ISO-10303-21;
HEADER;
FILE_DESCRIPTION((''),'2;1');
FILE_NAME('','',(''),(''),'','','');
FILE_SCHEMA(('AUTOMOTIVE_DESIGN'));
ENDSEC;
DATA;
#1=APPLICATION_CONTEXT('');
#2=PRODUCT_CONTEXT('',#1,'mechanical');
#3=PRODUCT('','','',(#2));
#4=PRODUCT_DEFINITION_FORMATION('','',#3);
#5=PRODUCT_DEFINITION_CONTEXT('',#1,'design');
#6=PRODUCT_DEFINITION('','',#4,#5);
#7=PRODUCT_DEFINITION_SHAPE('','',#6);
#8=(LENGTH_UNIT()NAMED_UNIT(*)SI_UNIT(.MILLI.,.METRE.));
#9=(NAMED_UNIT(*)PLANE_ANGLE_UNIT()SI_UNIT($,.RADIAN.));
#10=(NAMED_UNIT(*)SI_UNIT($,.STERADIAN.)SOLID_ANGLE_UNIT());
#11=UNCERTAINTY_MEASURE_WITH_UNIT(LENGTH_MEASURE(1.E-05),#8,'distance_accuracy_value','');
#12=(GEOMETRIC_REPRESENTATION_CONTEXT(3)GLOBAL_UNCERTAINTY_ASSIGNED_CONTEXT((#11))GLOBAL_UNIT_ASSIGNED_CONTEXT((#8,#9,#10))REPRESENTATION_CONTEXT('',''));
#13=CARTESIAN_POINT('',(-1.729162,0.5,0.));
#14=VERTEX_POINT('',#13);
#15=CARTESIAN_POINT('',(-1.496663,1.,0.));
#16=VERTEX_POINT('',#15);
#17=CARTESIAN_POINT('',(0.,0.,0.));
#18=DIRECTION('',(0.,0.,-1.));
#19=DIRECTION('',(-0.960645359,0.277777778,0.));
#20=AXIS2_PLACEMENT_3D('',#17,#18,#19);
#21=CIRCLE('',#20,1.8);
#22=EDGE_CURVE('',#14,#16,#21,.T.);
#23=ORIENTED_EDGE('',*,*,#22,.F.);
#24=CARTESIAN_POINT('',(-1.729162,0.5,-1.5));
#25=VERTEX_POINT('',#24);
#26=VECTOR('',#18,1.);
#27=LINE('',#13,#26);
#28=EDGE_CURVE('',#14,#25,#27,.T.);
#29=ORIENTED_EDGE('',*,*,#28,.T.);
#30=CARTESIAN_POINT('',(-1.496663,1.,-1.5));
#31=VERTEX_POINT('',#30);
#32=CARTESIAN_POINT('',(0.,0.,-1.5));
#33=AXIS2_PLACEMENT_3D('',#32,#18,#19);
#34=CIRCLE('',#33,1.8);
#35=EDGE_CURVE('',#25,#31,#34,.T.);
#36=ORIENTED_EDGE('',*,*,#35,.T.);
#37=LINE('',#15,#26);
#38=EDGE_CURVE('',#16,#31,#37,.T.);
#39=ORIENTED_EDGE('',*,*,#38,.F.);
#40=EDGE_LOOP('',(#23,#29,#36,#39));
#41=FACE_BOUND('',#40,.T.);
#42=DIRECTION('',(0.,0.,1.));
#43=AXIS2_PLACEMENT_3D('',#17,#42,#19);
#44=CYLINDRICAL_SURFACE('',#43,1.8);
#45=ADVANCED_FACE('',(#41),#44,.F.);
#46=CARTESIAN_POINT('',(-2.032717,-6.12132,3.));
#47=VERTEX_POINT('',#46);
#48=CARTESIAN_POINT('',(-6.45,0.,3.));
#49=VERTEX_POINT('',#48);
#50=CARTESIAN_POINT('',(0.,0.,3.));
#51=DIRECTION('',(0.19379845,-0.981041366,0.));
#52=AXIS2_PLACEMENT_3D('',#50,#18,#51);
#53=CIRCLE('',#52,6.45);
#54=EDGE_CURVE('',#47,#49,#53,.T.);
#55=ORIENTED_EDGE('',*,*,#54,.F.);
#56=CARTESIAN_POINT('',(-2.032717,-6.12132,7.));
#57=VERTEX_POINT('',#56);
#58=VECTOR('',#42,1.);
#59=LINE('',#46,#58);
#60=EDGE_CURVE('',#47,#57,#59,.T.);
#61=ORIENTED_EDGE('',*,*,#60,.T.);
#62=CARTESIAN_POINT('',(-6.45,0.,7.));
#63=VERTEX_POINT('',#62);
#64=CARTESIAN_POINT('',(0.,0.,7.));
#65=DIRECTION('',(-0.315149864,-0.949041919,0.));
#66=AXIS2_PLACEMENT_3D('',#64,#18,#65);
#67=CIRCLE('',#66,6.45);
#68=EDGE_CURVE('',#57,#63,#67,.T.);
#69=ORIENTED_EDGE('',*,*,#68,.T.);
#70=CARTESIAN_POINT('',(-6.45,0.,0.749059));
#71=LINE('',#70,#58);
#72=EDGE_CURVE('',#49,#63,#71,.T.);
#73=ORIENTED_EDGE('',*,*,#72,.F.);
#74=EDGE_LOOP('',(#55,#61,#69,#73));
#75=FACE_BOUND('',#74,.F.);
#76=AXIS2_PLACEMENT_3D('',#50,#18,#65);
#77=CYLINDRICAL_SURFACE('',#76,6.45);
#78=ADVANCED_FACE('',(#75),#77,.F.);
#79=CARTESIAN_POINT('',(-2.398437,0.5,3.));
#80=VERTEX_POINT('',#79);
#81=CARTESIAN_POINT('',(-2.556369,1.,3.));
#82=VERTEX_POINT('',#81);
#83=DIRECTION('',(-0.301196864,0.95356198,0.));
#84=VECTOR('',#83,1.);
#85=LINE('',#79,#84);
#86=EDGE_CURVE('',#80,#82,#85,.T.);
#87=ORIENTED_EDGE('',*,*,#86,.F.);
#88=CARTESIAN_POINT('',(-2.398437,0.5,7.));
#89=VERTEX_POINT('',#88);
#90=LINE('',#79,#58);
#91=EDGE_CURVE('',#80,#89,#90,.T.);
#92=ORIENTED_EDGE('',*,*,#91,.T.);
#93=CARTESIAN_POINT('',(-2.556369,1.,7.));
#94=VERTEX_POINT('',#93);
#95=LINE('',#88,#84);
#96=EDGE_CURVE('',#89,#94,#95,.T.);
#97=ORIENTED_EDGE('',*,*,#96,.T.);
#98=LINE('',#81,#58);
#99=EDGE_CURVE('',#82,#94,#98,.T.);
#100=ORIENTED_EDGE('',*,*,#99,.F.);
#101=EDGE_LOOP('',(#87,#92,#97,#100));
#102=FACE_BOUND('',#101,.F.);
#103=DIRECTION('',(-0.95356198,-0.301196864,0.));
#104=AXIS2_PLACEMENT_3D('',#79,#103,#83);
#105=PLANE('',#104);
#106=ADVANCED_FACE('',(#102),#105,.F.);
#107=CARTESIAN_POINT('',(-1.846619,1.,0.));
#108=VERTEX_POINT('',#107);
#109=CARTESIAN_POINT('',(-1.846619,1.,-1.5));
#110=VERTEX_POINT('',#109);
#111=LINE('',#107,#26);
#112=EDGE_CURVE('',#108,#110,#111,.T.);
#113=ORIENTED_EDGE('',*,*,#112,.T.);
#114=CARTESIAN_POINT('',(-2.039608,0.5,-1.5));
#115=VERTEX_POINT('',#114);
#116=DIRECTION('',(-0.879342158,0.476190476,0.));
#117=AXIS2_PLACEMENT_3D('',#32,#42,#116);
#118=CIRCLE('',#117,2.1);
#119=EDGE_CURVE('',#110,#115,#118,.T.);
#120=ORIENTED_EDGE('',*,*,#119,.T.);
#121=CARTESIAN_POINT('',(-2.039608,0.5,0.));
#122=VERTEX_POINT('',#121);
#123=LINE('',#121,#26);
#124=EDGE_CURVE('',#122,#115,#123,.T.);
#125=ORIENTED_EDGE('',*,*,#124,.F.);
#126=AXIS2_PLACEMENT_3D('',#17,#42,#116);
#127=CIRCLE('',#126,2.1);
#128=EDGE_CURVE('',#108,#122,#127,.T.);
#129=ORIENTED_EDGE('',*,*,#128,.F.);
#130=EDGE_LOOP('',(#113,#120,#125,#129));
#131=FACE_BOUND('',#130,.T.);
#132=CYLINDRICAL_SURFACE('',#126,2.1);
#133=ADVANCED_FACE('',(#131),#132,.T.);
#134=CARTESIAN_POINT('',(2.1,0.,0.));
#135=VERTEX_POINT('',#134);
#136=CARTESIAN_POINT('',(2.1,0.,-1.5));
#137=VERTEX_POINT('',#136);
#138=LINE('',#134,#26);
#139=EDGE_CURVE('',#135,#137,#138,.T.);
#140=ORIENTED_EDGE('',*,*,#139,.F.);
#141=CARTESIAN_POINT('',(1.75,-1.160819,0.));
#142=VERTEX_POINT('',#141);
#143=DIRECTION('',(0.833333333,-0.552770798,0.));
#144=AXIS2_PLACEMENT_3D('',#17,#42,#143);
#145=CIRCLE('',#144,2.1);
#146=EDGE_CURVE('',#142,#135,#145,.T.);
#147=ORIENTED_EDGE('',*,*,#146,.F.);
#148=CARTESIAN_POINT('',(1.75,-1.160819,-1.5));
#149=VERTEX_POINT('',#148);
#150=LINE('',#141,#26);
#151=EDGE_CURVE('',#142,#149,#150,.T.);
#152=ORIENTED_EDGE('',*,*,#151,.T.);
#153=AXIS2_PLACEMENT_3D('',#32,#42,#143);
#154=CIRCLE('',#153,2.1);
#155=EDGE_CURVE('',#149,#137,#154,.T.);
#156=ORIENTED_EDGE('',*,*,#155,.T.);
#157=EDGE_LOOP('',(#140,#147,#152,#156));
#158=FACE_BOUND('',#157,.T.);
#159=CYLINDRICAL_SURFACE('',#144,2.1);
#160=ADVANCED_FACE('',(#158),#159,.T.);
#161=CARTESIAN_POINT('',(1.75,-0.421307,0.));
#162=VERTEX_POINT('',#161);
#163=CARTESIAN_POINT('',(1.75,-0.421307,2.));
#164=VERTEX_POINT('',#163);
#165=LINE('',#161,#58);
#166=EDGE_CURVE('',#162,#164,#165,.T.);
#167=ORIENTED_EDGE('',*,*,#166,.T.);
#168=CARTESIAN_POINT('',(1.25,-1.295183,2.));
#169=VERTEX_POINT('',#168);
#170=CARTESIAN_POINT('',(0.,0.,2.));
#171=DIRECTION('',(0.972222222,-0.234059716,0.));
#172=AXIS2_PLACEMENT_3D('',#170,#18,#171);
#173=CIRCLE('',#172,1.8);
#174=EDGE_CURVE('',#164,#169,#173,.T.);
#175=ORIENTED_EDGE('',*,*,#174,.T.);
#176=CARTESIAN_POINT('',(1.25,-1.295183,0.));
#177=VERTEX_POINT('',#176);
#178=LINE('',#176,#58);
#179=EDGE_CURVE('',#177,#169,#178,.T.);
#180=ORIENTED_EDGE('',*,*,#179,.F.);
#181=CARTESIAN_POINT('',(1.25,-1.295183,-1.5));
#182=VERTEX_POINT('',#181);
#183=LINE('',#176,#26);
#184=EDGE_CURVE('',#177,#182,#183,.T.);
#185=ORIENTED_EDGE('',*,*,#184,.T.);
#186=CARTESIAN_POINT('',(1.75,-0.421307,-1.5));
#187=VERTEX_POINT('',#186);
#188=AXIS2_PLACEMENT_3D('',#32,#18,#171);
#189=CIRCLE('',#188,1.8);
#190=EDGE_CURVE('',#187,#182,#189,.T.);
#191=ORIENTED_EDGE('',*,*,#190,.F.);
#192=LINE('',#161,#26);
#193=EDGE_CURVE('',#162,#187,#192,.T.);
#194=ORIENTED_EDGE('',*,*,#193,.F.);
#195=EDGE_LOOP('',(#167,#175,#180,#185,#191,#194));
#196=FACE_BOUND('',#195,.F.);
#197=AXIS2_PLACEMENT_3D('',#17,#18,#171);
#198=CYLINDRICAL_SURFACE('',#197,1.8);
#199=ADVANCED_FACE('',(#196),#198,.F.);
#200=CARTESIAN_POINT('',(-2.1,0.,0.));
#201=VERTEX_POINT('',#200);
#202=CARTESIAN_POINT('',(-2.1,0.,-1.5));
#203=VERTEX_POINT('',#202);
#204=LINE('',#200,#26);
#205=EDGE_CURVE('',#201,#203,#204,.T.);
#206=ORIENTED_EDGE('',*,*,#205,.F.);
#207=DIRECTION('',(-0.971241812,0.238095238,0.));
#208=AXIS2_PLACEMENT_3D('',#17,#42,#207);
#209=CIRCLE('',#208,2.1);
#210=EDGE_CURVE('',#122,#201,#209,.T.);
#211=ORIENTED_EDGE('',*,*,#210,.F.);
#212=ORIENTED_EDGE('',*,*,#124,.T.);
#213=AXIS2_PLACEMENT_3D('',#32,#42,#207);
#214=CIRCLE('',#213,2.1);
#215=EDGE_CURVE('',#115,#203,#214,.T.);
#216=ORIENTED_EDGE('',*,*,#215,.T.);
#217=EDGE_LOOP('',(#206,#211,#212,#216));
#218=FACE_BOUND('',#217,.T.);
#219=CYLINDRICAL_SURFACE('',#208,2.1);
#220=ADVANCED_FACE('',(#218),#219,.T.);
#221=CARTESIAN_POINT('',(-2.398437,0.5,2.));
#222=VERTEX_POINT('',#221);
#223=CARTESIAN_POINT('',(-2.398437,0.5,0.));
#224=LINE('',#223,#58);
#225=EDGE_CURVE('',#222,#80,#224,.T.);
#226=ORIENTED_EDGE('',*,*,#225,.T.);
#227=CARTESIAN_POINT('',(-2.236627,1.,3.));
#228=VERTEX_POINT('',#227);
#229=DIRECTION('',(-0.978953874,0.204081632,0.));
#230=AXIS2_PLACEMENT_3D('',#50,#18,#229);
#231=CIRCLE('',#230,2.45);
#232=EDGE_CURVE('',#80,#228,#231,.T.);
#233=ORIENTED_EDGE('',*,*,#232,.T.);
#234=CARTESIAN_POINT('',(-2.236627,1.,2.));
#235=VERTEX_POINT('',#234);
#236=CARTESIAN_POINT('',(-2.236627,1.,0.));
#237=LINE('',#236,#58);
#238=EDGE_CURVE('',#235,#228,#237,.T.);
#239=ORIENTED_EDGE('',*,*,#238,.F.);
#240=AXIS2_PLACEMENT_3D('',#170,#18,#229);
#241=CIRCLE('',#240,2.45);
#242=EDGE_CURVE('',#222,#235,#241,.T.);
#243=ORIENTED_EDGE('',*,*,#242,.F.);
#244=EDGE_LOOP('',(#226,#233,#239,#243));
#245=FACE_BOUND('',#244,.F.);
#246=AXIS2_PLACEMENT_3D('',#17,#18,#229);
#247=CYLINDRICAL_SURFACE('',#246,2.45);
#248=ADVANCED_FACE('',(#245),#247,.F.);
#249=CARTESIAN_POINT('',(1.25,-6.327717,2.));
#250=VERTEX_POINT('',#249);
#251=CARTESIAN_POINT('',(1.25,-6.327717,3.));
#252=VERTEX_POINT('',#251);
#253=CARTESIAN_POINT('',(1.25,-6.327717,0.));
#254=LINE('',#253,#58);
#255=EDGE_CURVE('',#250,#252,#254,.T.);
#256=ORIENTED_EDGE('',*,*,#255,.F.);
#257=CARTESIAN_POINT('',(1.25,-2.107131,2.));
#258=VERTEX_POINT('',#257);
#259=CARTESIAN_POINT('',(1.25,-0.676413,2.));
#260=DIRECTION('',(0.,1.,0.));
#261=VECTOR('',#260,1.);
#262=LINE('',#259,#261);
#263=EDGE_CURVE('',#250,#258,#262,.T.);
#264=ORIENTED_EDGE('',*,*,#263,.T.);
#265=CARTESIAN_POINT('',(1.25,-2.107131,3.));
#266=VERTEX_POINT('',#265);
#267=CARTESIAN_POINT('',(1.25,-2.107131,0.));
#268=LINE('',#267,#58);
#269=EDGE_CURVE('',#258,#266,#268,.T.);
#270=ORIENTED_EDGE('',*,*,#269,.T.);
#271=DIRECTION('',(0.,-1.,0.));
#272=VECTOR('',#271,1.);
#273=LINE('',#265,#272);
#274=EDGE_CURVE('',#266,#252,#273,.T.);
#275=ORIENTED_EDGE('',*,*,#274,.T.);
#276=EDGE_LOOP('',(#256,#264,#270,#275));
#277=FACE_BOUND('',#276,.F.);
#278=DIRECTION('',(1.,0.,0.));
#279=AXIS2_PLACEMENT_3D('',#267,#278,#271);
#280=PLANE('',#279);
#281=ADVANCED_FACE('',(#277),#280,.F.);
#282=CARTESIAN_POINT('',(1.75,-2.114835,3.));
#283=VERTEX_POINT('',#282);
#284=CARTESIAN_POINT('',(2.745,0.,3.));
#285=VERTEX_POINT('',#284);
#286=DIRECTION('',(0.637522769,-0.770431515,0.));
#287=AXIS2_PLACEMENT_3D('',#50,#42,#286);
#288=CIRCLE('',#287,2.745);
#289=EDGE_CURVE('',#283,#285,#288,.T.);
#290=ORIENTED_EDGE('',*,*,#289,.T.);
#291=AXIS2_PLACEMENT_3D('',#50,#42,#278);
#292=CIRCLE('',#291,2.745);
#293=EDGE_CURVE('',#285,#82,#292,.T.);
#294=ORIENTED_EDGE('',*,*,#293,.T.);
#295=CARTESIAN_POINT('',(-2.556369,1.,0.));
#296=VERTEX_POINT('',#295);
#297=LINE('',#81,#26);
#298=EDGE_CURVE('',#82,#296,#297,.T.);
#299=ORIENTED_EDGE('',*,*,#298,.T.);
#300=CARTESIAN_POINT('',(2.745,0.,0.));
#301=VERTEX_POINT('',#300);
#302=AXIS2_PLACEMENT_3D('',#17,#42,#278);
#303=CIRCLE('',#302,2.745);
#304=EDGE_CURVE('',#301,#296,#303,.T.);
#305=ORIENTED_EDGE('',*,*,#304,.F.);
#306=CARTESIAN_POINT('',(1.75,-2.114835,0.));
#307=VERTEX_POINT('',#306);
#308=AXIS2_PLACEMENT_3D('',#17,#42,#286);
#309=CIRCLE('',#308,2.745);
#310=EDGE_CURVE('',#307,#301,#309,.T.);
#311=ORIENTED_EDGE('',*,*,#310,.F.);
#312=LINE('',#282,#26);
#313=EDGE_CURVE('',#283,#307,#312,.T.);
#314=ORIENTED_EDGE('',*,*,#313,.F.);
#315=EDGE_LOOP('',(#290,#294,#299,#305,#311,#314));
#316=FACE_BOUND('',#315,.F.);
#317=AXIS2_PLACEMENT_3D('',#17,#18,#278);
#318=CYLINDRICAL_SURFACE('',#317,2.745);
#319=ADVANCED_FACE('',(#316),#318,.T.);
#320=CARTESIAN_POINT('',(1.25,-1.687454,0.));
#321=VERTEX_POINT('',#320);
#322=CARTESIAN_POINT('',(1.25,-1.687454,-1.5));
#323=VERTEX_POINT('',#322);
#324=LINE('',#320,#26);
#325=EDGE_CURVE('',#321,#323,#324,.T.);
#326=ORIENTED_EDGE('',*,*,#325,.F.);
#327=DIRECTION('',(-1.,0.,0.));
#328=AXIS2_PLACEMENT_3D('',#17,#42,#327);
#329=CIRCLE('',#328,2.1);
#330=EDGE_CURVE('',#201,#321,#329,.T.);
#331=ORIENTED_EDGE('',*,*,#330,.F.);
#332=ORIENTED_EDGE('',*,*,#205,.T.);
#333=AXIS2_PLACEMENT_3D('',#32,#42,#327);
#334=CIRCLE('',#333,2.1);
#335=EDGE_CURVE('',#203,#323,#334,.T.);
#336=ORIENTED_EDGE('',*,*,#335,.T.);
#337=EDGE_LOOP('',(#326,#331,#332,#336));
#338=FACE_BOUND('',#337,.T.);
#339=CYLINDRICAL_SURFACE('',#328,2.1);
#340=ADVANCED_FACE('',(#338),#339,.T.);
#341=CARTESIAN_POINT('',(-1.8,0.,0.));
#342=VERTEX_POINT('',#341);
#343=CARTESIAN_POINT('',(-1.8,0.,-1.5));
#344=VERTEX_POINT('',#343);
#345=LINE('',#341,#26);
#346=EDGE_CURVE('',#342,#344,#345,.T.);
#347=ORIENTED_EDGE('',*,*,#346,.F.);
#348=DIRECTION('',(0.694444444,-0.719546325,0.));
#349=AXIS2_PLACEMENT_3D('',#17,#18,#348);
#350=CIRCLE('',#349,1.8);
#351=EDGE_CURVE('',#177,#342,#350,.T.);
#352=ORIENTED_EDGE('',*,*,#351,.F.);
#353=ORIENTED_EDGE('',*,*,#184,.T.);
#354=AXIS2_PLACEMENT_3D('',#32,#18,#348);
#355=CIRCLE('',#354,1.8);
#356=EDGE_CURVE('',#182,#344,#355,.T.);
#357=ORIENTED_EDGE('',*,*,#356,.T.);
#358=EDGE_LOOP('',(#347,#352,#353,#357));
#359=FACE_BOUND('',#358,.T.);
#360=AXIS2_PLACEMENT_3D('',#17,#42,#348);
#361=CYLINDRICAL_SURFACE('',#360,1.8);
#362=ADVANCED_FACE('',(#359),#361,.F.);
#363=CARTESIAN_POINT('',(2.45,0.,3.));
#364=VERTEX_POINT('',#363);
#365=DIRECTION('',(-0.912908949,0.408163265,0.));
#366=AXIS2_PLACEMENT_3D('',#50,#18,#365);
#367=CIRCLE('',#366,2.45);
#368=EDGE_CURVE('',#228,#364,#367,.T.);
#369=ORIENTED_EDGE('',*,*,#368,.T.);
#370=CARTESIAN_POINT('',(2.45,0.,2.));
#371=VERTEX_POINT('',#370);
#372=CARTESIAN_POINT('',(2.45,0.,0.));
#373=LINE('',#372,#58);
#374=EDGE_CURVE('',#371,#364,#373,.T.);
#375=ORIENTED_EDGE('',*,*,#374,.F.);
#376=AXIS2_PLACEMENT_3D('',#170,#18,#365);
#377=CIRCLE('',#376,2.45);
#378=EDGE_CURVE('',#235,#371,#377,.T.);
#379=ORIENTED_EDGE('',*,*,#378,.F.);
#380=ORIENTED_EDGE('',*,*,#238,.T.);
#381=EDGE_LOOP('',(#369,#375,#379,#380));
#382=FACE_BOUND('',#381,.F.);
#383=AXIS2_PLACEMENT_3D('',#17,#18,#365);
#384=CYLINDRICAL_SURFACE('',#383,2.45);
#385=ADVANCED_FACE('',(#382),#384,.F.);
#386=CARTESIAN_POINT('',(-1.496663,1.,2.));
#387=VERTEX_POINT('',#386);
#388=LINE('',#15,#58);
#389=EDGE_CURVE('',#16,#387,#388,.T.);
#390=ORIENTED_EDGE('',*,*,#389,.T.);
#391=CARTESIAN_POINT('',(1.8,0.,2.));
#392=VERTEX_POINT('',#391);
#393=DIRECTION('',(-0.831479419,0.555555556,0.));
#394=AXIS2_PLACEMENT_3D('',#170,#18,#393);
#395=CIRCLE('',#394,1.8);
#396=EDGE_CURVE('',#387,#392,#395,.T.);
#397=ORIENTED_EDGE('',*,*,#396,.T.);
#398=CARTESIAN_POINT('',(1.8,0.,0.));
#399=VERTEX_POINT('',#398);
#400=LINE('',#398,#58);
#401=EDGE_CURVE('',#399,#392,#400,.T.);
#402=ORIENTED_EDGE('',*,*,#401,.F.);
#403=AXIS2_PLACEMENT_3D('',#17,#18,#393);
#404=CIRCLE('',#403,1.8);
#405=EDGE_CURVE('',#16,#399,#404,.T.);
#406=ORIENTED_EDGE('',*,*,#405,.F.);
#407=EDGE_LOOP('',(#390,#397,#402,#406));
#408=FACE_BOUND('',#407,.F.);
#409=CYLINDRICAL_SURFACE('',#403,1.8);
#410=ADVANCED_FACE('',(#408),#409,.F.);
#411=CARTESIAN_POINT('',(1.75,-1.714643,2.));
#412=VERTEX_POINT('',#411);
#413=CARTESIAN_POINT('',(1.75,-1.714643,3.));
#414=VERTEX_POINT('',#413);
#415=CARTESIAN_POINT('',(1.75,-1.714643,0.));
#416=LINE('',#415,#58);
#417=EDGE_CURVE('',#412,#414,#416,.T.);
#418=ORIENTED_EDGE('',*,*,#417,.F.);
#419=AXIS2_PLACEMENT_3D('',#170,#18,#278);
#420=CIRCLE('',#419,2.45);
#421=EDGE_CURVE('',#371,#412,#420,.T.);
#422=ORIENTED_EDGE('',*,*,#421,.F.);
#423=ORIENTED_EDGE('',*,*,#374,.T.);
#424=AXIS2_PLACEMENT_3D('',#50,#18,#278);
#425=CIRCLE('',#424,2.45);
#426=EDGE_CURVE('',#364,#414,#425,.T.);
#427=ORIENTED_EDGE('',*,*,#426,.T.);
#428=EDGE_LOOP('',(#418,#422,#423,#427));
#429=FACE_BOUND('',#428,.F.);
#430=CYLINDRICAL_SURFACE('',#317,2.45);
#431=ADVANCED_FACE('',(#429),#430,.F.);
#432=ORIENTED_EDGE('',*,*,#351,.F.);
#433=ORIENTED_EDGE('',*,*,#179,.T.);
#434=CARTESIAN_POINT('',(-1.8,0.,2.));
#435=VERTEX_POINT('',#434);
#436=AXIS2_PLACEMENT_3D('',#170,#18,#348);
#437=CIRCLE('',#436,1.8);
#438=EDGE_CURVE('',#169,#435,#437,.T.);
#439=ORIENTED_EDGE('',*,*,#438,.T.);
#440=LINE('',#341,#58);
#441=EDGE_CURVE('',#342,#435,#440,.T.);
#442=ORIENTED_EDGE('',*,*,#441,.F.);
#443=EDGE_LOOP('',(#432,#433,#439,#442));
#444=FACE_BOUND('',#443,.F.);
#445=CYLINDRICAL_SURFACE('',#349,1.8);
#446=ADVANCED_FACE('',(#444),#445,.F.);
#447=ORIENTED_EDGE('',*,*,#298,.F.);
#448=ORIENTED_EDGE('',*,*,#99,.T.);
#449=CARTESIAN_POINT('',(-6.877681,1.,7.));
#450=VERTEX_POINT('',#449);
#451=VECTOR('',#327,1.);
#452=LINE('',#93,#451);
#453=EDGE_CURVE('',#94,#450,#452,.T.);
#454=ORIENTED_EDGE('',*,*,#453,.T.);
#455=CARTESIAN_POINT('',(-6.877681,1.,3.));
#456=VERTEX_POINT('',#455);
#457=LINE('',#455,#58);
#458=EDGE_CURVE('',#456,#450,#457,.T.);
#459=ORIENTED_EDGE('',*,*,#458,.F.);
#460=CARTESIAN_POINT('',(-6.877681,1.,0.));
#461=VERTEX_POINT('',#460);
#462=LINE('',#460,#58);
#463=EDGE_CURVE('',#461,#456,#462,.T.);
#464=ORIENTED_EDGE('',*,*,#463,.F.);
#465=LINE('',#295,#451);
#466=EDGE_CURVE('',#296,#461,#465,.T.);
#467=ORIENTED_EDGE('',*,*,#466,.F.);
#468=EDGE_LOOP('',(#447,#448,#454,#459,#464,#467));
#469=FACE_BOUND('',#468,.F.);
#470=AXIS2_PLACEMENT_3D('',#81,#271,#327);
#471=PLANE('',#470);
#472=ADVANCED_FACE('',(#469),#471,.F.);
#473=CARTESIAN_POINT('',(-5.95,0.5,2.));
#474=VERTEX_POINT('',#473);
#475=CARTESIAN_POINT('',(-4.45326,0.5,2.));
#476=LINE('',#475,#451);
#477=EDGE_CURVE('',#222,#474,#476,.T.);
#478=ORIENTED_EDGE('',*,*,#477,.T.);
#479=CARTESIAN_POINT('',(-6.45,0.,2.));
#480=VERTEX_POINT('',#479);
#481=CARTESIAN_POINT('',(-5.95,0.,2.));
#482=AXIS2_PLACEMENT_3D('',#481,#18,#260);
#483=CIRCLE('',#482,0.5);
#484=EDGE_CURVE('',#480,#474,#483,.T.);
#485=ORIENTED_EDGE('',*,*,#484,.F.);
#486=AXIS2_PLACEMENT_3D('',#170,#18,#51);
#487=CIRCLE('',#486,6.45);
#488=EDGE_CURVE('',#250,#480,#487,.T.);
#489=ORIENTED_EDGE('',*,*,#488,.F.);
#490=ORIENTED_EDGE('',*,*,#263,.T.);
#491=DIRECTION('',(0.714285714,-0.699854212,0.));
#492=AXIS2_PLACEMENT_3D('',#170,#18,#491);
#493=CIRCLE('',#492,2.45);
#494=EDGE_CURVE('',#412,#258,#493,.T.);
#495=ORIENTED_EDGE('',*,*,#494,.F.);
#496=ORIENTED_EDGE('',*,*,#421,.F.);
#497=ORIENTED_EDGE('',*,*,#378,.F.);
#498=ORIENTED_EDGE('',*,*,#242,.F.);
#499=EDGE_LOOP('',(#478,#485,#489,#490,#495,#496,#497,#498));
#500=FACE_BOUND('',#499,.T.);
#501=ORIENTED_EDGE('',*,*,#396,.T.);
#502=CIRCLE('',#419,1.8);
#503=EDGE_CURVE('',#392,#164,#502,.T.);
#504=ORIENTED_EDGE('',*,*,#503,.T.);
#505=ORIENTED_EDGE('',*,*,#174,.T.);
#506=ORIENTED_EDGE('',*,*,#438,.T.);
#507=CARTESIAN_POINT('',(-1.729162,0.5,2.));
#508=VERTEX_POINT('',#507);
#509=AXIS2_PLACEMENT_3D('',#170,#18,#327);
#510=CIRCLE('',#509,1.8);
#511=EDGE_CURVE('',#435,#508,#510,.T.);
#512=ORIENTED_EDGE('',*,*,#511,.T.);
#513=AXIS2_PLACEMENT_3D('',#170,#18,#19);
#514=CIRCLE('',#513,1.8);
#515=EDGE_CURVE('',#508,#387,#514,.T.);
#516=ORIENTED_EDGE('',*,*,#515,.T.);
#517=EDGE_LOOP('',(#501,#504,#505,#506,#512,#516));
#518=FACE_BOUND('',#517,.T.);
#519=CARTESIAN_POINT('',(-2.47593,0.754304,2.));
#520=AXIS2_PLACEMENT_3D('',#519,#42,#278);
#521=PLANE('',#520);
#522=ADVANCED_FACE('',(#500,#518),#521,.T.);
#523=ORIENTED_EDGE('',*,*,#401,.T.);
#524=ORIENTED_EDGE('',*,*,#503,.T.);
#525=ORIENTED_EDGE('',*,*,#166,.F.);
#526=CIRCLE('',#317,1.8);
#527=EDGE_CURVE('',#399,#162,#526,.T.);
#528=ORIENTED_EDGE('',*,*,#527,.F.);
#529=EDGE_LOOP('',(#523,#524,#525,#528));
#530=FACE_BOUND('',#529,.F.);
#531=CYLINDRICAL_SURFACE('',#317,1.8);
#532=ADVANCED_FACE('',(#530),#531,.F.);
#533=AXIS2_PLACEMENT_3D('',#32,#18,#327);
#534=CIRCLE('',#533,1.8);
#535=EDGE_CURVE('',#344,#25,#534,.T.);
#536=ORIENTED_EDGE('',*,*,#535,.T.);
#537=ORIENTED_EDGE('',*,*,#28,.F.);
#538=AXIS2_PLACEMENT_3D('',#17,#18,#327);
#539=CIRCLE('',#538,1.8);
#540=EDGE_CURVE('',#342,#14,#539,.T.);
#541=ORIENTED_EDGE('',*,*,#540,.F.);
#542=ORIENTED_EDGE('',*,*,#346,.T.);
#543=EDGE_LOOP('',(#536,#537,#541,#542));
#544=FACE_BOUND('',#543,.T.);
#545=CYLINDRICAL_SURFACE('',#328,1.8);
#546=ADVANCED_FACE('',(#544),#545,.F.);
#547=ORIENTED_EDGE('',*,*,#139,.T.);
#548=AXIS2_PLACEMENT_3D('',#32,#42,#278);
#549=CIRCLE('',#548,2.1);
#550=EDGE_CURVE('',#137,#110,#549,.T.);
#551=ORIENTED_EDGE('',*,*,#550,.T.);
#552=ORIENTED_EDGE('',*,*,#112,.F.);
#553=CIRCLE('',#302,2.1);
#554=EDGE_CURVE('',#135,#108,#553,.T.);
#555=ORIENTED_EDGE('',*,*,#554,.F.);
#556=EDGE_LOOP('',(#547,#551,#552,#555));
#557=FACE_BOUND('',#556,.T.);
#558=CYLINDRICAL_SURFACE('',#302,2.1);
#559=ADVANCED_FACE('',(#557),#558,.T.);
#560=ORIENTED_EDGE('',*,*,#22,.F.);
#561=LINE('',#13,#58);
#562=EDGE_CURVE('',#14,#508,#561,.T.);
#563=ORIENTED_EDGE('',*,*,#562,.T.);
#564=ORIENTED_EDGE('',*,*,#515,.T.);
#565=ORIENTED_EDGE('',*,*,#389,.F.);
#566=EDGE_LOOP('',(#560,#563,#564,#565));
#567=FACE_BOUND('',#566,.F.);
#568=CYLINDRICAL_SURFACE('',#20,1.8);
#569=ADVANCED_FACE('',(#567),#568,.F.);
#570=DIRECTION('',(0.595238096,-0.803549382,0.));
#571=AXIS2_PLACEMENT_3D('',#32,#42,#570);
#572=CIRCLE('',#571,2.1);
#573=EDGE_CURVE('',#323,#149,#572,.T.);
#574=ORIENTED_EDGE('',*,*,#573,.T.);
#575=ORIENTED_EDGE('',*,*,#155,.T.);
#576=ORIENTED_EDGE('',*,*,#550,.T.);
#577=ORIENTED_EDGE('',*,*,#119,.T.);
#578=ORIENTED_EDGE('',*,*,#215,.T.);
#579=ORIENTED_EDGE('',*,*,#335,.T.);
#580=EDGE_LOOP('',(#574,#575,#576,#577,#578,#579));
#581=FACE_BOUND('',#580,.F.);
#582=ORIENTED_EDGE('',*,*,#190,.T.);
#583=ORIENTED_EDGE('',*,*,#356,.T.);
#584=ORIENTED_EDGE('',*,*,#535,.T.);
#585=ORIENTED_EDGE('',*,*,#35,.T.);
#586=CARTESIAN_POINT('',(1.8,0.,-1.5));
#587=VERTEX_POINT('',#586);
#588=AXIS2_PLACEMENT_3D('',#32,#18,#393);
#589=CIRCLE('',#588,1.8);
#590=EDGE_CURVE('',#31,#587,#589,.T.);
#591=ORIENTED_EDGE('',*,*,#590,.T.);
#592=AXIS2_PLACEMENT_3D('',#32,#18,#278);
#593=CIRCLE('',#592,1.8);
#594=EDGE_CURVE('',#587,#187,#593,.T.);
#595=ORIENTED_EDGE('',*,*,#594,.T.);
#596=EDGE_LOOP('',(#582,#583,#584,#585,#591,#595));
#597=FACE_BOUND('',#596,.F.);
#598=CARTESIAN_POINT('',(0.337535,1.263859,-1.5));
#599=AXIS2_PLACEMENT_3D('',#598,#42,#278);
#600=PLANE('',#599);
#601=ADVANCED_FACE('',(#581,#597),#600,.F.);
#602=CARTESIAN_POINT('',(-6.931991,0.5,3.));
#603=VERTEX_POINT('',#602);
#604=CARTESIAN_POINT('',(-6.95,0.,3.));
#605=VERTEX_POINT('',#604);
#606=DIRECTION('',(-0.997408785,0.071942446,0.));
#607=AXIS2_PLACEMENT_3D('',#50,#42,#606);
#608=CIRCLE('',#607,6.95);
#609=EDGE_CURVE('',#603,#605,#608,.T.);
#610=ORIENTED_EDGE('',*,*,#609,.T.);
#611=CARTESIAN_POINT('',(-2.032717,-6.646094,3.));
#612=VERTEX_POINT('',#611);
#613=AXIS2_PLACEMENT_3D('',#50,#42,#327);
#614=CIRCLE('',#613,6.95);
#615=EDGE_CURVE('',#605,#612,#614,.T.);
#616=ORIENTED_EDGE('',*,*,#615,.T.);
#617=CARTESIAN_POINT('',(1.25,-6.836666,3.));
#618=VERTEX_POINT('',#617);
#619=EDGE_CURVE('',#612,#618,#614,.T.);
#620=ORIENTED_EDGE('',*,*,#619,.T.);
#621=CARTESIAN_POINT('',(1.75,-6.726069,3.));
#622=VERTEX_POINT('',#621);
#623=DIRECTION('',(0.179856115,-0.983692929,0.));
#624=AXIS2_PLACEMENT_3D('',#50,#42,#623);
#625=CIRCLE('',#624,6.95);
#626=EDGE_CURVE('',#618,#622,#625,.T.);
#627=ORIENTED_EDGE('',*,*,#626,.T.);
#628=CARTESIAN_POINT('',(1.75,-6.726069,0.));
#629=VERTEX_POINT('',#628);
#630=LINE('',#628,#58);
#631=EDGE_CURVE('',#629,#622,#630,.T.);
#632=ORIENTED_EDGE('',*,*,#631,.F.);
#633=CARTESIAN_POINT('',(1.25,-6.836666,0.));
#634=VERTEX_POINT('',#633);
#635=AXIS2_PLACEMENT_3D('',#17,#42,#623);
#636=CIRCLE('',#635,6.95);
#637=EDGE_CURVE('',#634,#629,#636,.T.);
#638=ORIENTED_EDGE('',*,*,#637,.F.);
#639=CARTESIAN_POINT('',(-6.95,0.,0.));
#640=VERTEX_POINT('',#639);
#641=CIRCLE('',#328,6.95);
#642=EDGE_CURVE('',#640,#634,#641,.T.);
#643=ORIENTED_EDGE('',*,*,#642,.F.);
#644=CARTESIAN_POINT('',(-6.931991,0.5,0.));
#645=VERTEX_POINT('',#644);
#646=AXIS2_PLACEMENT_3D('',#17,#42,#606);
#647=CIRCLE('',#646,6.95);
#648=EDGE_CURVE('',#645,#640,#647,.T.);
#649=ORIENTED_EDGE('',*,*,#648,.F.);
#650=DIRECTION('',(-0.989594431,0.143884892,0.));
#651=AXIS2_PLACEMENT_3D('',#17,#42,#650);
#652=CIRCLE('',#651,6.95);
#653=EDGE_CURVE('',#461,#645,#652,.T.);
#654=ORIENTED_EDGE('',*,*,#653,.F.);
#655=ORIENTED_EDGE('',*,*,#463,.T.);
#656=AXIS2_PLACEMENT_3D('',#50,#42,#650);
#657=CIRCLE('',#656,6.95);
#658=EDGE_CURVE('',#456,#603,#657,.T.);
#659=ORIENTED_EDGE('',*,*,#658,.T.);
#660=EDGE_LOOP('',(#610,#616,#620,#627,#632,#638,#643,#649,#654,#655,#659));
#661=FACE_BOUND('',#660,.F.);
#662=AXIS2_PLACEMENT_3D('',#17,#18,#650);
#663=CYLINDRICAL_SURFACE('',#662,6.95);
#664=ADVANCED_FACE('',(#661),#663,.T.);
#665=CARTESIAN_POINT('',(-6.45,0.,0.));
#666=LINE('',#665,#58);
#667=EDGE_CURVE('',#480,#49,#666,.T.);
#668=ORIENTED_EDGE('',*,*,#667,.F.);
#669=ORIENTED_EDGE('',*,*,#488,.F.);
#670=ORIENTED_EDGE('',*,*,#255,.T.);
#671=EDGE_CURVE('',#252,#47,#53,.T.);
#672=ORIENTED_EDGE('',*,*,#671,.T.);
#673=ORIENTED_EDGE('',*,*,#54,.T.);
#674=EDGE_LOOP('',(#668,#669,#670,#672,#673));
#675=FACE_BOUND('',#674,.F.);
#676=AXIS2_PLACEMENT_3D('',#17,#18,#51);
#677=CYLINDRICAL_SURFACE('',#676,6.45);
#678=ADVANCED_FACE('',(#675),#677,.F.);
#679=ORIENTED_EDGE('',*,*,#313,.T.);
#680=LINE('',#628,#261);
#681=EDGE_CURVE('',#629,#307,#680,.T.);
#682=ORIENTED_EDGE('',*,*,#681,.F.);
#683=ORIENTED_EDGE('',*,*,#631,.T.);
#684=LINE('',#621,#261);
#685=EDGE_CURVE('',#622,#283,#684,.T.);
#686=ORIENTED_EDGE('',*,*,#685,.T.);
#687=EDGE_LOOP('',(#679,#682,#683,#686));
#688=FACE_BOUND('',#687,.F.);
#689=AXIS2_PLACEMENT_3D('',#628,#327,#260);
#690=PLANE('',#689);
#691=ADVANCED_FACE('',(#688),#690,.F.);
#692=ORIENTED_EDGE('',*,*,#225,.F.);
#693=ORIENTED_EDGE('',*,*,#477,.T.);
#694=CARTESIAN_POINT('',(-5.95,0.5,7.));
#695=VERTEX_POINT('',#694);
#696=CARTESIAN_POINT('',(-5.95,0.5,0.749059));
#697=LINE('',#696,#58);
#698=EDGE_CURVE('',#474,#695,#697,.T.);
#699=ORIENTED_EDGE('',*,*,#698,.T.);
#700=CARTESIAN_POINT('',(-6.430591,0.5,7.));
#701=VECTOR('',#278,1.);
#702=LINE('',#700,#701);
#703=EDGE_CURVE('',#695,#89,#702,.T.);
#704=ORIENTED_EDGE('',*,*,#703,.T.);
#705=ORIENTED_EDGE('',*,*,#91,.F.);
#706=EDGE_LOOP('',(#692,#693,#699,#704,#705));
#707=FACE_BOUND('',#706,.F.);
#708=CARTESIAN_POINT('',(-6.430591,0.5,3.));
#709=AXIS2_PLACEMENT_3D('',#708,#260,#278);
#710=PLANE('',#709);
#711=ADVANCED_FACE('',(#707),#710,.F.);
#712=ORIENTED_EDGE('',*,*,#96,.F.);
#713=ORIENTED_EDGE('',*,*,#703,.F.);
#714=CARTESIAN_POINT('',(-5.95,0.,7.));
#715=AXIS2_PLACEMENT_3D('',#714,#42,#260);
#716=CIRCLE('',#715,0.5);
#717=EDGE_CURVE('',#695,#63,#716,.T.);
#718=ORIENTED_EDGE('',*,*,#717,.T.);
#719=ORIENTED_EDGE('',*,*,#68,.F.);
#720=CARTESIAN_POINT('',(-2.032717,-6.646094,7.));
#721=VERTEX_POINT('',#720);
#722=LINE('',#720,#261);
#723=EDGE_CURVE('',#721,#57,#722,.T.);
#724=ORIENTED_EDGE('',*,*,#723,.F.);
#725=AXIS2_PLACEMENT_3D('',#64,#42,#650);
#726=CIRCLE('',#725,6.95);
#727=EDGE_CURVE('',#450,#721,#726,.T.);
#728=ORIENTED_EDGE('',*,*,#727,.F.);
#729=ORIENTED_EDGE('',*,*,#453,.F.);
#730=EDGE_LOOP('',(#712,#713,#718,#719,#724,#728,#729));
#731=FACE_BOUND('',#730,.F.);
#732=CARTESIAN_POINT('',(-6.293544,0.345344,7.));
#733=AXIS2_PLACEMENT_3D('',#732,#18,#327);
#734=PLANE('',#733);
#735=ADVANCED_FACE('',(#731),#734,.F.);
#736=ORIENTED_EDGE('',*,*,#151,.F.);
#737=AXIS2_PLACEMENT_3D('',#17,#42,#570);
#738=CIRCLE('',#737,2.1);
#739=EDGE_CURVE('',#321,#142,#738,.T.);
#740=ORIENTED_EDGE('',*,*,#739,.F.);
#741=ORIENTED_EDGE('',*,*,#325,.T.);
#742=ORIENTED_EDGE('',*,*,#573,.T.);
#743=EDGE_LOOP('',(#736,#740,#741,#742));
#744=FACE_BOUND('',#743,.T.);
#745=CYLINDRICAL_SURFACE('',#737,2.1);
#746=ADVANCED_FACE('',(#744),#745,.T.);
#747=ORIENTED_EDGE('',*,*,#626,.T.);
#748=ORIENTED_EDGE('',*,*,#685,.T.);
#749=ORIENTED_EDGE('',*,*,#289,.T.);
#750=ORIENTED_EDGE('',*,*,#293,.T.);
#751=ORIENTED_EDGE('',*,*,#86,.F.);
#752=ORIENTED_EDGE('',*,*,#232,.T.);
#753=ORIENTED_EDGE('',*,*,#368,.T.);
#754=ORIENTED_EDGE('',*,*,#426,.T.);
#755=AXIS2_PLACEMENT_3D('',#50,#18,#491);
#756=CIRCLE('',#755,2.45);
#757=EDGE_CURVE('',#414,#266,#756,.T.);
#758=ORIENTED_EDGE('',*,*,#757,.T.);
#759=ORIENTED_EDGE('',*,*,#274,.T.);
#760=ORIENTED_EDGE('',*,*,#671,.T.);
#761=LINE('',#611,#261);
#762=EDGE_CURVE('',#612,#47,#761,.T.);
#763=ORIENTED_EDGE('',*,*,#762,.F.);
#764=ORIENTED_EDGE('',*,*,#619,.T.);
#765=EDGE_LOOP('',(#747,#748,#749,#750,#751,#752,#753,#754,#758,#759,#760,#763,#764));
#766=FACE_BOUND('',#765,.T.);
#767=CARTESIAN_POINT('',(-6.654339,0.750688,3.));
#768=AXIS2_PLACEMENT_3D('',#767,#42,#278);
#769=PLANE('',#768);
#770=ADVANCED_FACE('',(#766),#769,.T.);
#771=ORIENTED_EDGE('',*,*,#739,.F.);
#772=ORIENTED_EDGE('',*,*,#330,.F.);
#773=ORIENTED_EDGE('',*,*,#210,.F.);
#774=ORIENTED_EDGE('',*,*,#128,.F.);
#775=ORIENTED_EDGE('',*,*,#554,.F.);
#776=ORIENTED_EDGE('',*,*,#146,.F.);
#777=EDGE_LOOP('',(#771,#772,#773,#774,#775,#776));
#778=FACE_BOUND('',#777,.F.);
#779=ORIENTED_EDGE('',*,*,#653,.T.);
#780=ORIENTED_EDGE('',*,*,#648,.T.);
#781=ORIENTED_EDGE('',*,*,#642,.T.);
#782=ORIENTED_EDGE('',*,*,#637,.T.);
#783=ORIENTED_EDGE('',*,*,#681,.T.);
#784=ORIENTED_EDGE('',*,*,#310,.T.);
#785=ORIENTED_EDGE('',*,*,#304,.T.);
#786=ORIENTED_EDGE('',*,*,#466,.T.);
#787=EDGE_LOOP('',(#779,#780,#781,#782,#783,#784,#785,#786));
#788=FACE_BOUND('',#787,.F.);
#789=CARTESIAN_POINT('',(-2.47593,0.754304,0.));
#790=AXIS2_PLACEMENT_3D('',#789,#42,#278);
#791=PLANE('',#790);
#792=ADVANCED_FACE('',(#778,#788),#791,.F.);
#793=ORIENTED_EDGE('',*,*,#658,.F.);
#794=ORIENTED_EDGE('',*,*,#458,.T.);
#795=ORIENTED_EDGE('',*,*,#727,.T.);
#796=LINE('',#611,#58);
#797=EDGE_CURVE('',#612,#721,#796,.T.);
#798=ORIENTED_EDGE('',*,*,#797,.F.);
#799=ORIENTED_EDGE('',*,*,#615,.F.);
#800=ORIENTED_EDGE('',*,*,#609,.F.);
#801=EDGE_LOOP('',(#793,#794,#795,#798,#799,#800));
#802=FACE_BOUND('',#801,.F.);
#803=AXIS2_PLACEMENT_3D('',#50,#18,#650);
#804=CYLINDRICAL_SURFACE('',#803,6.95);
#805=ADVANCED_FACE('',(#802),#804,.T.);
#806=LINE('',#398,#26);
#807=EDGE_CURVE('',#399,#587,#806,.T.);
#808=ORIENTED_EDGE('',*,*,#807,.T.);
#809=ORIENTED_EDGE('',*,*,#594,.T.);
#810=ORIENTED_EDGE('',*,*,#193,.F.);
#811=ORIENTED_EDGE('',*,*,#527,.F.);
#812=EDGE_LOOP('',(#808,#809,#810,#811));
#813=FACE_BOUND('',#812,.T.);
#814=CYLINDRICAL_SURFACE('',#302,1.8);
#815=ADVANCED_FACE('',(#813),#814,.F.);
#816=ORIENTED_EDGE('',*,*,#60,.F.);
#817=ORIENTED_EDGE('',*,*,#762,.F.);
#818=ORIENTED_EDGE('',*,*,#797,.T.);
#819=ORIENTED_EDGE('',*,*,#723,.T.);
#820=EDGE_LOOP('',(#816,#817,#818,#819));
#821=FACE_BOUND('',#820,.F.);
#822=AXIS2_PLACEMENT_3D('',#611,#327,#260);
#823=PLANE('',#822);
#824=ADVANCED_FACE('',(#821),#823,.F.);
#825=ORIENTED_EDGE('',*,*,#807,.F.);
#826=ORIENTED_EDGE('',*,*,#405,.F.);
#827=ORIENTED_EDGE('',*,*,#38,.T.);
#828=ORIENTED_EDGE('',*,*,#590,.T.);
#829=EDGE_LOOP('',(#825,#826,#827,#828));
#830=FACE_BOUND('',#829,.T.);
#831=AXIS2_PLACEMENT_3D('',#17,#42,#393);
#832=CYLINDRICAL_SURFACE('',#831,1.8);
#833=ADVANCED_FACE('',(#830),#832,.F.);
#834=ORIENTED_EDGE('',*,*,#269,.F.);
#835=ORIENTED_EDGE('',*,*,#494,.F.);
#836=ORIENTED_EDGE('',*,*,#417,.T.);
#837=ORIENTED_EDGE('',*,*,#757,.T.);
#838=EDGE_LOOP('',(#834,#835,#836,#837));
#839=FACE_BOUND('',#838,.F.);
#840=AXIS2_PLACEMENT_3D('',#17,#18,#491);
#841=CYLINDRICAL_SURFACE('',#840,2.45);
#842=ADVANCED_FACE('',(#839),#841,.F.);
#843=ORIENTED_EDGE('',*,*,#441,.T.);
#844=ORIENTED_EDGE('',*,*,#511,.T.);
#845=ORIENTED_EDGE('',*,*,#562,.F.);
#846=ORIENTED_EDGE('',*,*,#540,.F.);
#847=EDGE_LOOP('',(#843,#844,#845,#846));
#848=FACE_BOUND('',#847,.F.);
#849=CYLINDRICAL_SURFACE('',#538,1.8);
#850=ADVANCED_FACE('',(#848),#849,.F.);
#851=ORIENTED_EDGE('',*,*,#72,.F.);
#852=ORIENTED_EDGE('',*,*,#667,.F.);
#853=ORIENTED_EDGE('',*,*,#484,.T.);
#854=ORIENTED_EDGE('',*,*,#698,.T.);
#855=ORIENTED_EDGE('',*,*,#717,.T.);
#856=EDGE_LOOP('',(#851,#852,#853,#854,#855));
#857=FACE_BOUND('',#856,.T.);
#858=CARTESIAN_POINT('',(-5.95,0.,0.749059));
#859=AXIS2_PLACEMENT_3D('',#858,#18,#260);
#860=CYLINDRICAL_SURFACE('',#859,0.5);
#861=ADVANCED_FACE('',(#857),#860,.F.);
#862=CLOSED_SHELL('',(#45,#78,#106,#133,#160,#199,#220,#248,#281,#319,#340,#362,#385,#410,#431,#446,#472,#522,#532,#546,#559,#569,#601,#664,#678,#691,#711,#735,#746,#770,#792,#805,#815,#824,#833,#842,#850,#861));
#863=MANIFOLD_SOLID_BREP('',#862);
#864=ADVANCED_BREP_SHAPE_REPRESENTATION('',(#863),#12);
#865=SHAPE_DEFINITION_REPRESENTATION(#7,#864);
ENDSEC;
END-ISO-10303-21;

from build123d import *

# Parameters (mm, degrees)
F1_DEPTH    = 2
F2_DEPTH    = 3
F3_DEPTH    = 1.5
F5_DEPTH    = 4
F6_T1_DEPTH = 6.2509414233


# Not quite as in the source:
# - a fillet or chamfer that OpenCascade refuses, or shapes differently, is made with other operations: its cross-section is extruded or revolved along the edge and cut away or added
# - a feature names something its author has since deleted; it is built from what else it names


with BuildPart() as f1:
    # F0 (on Top) → F1 (new body)
    with BuildSketch(Plane.XY):
        with BuildLine():
            ThreePointArc((-2.398436991, 0.5), (-2.3309771289, 0.7543511281), (-2.2366269246, 1))
            Line((-2.2366269246, 1), (-2.556369496, 1))
            ThreePointArc((-2.556369496, 1), (-2.6395896521, 0.7533866658), (-2.6990785465, 0.5))
            Line((-2.6990785465, 0.5), (-2.398436991, 0.5))
        make_face()
        with BuildLine():
            ThreePointArc((-2.2366269246, 1), (0.5112553348, 2.3960630173), (2.45, 0))
            ThreePointArc((2.45, 0), (2.2682592444, -0.9260129589), (1.75, -1.7146428199))
            Line((1.75, -1.7146428199), (1.75, -2.1148345089))
            ThreePointArc((1.75, -2.1148345089), (2.483825175, -1.1686049375), (2.745, 0))
            ThreePointArc((2.745, 0), (0.5088176164, 2.6974301906), (-2.556369496, 1))
            Line((-2.556369496, 1), (-2.2366269246, 1))
        make_face()
        with BuildLine():
            ThreePointArc((-2.6990785465, 0.5), (-2.6395896521, 0.7533866658), (-2.556369496, 1))
            Line((-2.556369496, 1), (-6.3720091023, 1))
            ThreePointArc((-6.3720091023, 1), (-6.4061799882, 0.7505717543), (-6.4305909526, 0.5))
            Line((-6.4305909526, 0.5), (-2.6990785465, 0.5))
        make_face()
        with BuildLine():
            ThreePointArc((-2.745, 0), (-2.7334955286, 0.2510521758), (-2.6990785465, 0.5))
            Line((-2.6990785465, 0.5), (-6.4305909526, 0.5))
            ThreePointArc((-6.4305909526, 0.5), (-6.4451459116, 0.2501882847), (-6.45, 0))
            Line((-6.45, 0), (-2.745, 0))
        make_face()
        with BuildLine():
            Line((1.25, -6.3277168078), (1.25, -2.4438749968))
            ThreePointArc((1.25, -2.4438749968), (-1.4324410983, -2.341610023), (-2.745, 0))
            Line((-2.745, 0), (-6.45, 0))
            ThreePointArc((-6.45, 0), (-4.0951190459, -4.9832218494), (1.25, -6.3277168078))
        make_face()
        with BuildLine():
            Line((1.25, -2.4438749968), (1.25, -2.1071307506))
            ThreePointArc((1.25, -2.1071307506), (-1.2124355653, -2.1289668856), (-2.45, 0))
            Line((-2.45, 0), (-2.745, 0))
            ThreePointArc((-2.745, 0), (-1.4324410983, -2.341610023), (1.25, -2.4438749968))
        make_face()
        with BuildLine():
            Line((1.75, -2.1148345089), (1.75, -1.7146428199))
            ThreePointArc((1.75, -1.7146428199), (1.5127827649, -1.927171063), (1.25, -2.1071307506))
            Line((1.25, -2.1071307506), (1.25, -2.4438749968))
            ThreePointArc((1.25, -2.4438749968), (1.5089953316, -2.2930237873), (1.75, -2.1148345089))
        make_face()
        with BuildLine():
            Line((1.75, -6.2080592781), (1.75, -2.1148345089))
            ThreePointArc((1.75, -2.1148345089), (1.5089953316, -2.2930237873), (1.25, -2.4438749968))
            Line((1.25, -2.4438749968), (1.25, -6.3277168078))
            ThreePointArc((1.25, -6.3277168078), (1.5011926862, -6.272871792), (1.75, -6.2080592781))
        make_face()
        with BuildLine():
            ThreePointArc((-6.4305909526, 0.5), (-6.4061799882, 0.7505717543), (-6.3720091023, 1))
            Line((-6.3720091023, 1), (-6.8776812953, 1))
            ThreePointArc((-6.8776812953, 1), (-6.9093605068, 0.7504914307), (-6.931991056, 0.5))
            Line((-6.931991056, 0.5), (-6.4305909526, 0.5))
        make_face()
        with BuildLine():
            Line((1.75, -6.7260686883), (1.75, -6.2080592781))
            ThreePointArc((1.75, -6.2080592781), (1.5011926862, -6.272871792), (1.25, -6.3277168078))
            Line((1.25, -6.3277168078), (1.25, -6.8366658541))
            ThreePointArc((1.25, -6.8366658541), (1.501018965, -6.7859739218), (1.75, -6.7260686883))
        make_face()
        with BuildLine():
            Line((1.25, -6.8366658541), (1.25, -6.3277168078))
            ThreePointArc((1.25, -6.3277168078), (-4.0951190459, -4.9832218494), (-6.45, 0))
            Line((-6.45, 0), (-6.95, 0))
            ThreePointArc((-6.95, 0), (-4.4505617623, -5.3380708126), (1.25, -6.8366658541))
        make_face()
        with BuildLine():
            ThreePointArc((-6.45, 0), (-6.4451459116, 0.2501882847), (-6.4305909526, 0.5))
            Line((-6.4305909526, 0.5), (-6.931991056, 0.5))
            ThreePointArc((-6.931991056, 0.5), (-6.9454963048, 0.2501621085), (-6.95, 0))
            Line((-6.95, 0), (-6.45, 0))
        make_face()
        with BuildLine():
            ThreePointArc((-2.45, 0), (-2.4370751556, 0.2513258562), (-2.398436991, 0.5))
            Line((-2.398436991, 0.5), (-2.6990785465, 0.5))
            ThreePointArc((-2.6990785465, 0.5), (-2.7334955286, 0.2510521758), (-2.745, 0))
            Line((-2.745, 0), (-2.45, 0))
        make_face()
        with BuildLine():
            ThreePointArc((-2.45, 0), (-1.2124355653, -2.1289668856), (1.25, -2.1071307506))
            Line((1.25, -2.1071307506), (1.25, -1.6874537031))
            ThreePointArc((1.25, -1.6874537031), (-0.9447221814, -1.8754999334), (-2.1, 0))
            Line((-2.1, 0), (-2.45, 0))
        make_face()
        with BuildLine():
            ThreePointArc((-2.1, 0), (-0.9447221814, -1.8754999334), (1.25, -1.6874537031))
            Line((1.25, -1.6874537031), (1.25, -1.2951833847))
            ThreePointArc((1.25, -1.2951833847), (-0.703562364, -1.6568041526), (-1.8, 0))
            Line((-1.8, 0), (-2.1, 0))
        make_face()
        with BuildLine():
            Line((-2.0396078054, 0.5), (-2.398436991, 0.5))
            ThreePointArc((-2.398436991, 0.5), (-2.4370751556, 0.2513258562), (-2.45, 0))
            Line((-2.45, 0), (-2.1, 0))
            ThreePointArc((-2.1, 0), (-2.0848472835, 0.2518170056), (-2.0396078054, 0.5))
        make_face()
        with BuildLine():
            Line((-1.8466185313, 1), (-2.2366269246, 1))
            ThreePointArc((-2.2366269246, 1), (-2.3309771289, 0.7543511281), (-2.398436991, 0.5))
            Line((-2.398436991, 0.5), (-2.0396078054, 0.5))
            ThreePointArc((-2.0396078054, 0.5), (-1.9591295988, 0.7561819986), (-1.8466185313, 1))
        make_face()
        with BuildLine():
            Line((2.1, 0), (2.45, 0))
            ThreePointArc((2.45, 0), (0.5112553348, 2.3960630173), (-2.2366269246, 1))
            Line((-2.2366269246, 1), (-1.8466185313, 1))
            ThreePointArc((-1.8466185313, 1), (0.5158008745, 2.0356692899), (2.1, 0))
        make_face()
        with BuildLine():
            Line((-1.7291616466, 0.5), (-2.0396078054, 0.5))
            ThreePointArc((-2.0396078054, 0.5), (-2.0848472835, 0.2518170056), (-2.1, 0))
            Line((-2.1, 0), (-1.8, 0))
            ThreePointArc((-1.8, 0), (-1.7822024245, 0.2524965704), (-1.7291616466, 0.5))
        make_face()
        with BuildLine():
            Line((-1.4966629547, 1), (-1.8466185313, 1))
            ThreePointArc((-1.8466185313, 1), (-1.9591295988, 0.7561819986), (-2.0396078054, 0.5))
            Line((-2.0396078054, 0.5), (-1.7291616466, 0.5))
            ThreePointArc((-1.7291616466, 0.5), (-1.6321721997, 0.7589558027), (-1.4966629547, 1))
        make_face()
        with BuildLine():
            Line((1.8, 0), (2.1, 0))
            ThreePointArc((2.1, 0), (0.5158008745, 2.0356692899), (-1.8466185313, 1))
            Line((-1.8466185313, 1), (-1.4966629547, 1))
            ThreePointArc((-1.4966629547, 1), (0.522497216, 1.722497216), (1.8, 0))
        make_face()
        with BuildLine():
            ThreePointArc((1.25, -1.6874537031), (1.5229366739, -1.4459128214), (1.75, -1.1608186766))
            Line((1.75, -1.1608186766), (1.75, -0.4213074887))
            ThreePointArc((1.75, -0.4213074887), (1.5623427186, -0.8939156725), (1.25, -1.2951833847))
            Line((1.25, -1.2951833847), (1.25, -1.6874537031))
        make_face()
        with BuildLine():
            ThreePointArc((1.25, -2.1071307506), (1.5127827649, -1.927171063), (1.75, -1.7146428199))
            Line((1.75, -1.7146428199), (1.75, -1.1608186766))
            ThreePointArc((1.75, -1.1608186766), (1.5229366739, -1.4459128214), (1.25, -1.6874537031))
            Line((1.25, -1.6874537031), (1.25, -2.1071307506))
        make_face()
        with BuildLine():
            ThreePointArc((1.75, -1.1608186766), (2.0105969263, -0.6062177826), (2.1, 0))
            Line((2.1, 0), (1.8, 0))
            ThreePointArc((1.8, 0), (1.7874562932, -0.2121320344), (1.75, -0.4213074887))
            Line((1.75, -0.4213074887), (1.75, -1.1608186766))
        make_face()
        with BuildLine():
            ThreePointArc((1.75, -1.7146428199), (2.2682592444, -0.9260129589), (2.45, 0))
            Line((2.45, 0), (2.1, 0))
            ThreePointArc((2.1, 0), (2.0105969263, -0.6062177826), (1.75, -1.1608186766))
            Line((1.75, -1.1608186766), (1.75, -1.7146428199))
        make_face()
    extrude(amount=F1_DEPTH)

    # F0 (on Top) → F2 (join)
    with BuildSketch(Plane.XY):
        with BuildLine():
            ThreePointArc((-6.4305909526, 0.5), (-6.4061799882, 0.7505717543), (-6.3720091023, 1))
            Line((-6.3720091023, 1), (-6.8776812953, 1))
            ThreePointArc((-6.8776812953, 1), (-6.9093605068, 0.7504914307), (-6.931991056, 0.5))
            Line((-6.931991056, 0.5), (-6.4305909526, 0.5))
        make_face()
        with BuildLine():
            ThreePointArc((-2.6990785465, 0.5), (-2.6395896521, 0.7533866658), (-2.556369496, 1))
            Line((-2.556369496, 1), (-6.3720091023, 1))
            ThreePointArc((-6.3720091023, 1), (-6.4061799882, 0.7505717543), (-6.4305909526, 0.5))
            Line((-6.4305909526, 0.5), (-2.6990785465, 0.5))
        make_face()
        with BuildLine():
            ThreePointArc((-2.398436991, 0.5), (-2.3309771289, 0.7543511281), (-2.2366269246, 1))
            Line((-2.2366269246, 1), (-2.556369496, 1))
            ThreePointArc((-2.556369496, 1), (-2.6395896521, 0.7533866658), (-2.6990785465, 0.5))
            Line((-2.6990785465, 0.5), (-2.398436991, 0.5))
        make_face()
        with BuildLine():
            ThreePointArc((-2.2366269246, 1), (0.5112553348, 2.3960630173), (2.45, 0))
            ThreePointArc((2.45, 0), (2.2682592444, -0.9260129589), (1.75, -1.7146428199))
            Line((1.75, -1.7146428199), (1.75, -2.1148345089))
            ThreePointArc((1.75, -2.1148345089), (2.483825175, -1.1686049375), (2.745, 0))
            ThreePointArc((2.745, 0), (0.5088176164, 2.6974301906), (-2.556369496, 1))
            Line((-2.556369496, 1), (-2.2366269246, 1))
        make_face()
        with BuildLine():
            Line((1.75, -2.1148345089), (1.75, -1.7146428199))
            ThreePointArc((1.75, -1.7146428199), (1.5127827649, -1.927171063), (1.25, -2.1071307506))
            Line((1.25, -2.1071307506), (1.25, -2.4438749968))
            ThreePointArc((1.25, -2.4438749968), (1.5089953316, -2.2930237873), (1.75, -2.1148345089))
        make_face()
        with BuildLine():
            Line((1.75, -6.2080592781), (1.75, -2.1148345089))
            ThreePointArc((1.75, -2.1148345089), (1.5089953316, -2.2930237873), (1.25, -2.4438749968))
            Line((1.25, -2.4438749968), (1.25, -6.3277168078))
            ThreePointArc((1.25, -6.3277168078), (1.5011926862, -6.272871792), (1.75, -6.2080592781))
        make_face()
        with BuildLine():
            Line((1.75, -6.7260686883), (1.75, -6.2080592781))
            ThreePointArc((1.75, -6.2080592781), (1.5011926862, -6.272871792), (1.25, -6.3277168078))
            Line((1.25, -6.3277168078), (1.25, -6.8366658541))
            ThreePointArc((1.25, -6.8366658541), (1.501018965, -6.7859739218), (1.75, -6.7260686883))
        make_face()
        with BuildLine():
            Line((1.25, -6.8366658541), (1.25, -6.3277168078))
            ThreePointArc((1.25, -6.3277168078), (-4.0951190459, -4.9832218494), (-6.45, 0))
            Line((-6.45, 0), (-6.95, 0))
            ThreePointArc((-6.95, 0), (-4.4505617623, -5.3380708126), (1.25, -6.8366658541))
        make_face()
        with BuildLine():
            ThreePointArc((-6.45, 0), (-6.4451459116, 0.2501882847), (-6.4305909526, 0.5))
            Line((-6.4305909526, 0.5), (-6.931991056, 0.5))
            ThreePointArc((-6.931991056, 0.5), (-6.9454963048, 0.2501621085), (-6.95, 0))
            Line((-6.95, 0), (-6.45, 0))
        make_face()
    extrude(amount=F2_DEPTH)

    # F0 (on Top) → F3 (join)
    with BuildSketch(Plane.XY):
        with BuildLine():
            Line((1.8, 0), (2.1, 0))
            ThreePointArc((2.1, 0), (0.5158008745, 2.0356692899), (-1.8466185313, 1))
            Line((-1.8466185313, 1), (-1.4966629547, 1))
            ThreePointArc((-1.4966629547, 1), (0.522497216, 1.722497216), (1.8, 0))
        make_face()
        with BuildLine():
            Line((-1.4966629547, 1), (-1.8466185313, 1))
            ThreePointArc((-1.8466185313, 1), (-1.9591295988, 0.7561819986), (-2.0396078054, 0.5))
            Line((-2.0396078054, 0.5), (-1.7291616466, 0.5))
            ThreePointArc((-1.7291616466, 0.5), (-1.6321721997, 0.7589558027), (-1.4966629547, 1))
        make_face()
        with BuildLine():
            Line((-1.7291616466, 0.5), (-2.0396078054, 0.5))
            ThreePointArc((-2.0396078054, 0.5), (-2.0848472835, 0.2518170056), (-2.1, 0))
            Line((-2.1, 0), (-1.8, 0))
            ThreePointArc((-1.8, 0), (-1.7822024245, 0.2524965704), (-1.7291616466, 0.5))
        make_face()
        with BuildLine():
            ThreePointArc((-2.1, 0), (-0.9447221814, -1.8754999334), (1.25, -1.6874537031))
            Line((1.25, -1.6874537031), (1.25, -1.2951833847))
            ThreePointArc((1.25, -1.2951833847), (-0.703562364, -1.6568041526), (-1.8, 0))
            Line((-1.8, 0), (-2.1, 0))
        make_face()
        with BuildLine():
            ThreePointArc((1.25, -1.6874537031), (1.5229366739, -1.4459128214), (1.75, -1.1608186766))
            Line((1.75, -1.1608186766), (1.75, -0.4213074887))
            ThreePointArc((1.75, -0.4213074887), (1.5623427186, -0.8939156725), (1.25, -1.2951833847))
            Line((1.25, -1.2951833847), (1.25, -1.6874537031))
        make_face()
        with BuildLine():
            ThreePointArc((1.75, -1.1608186766), (2.0105969263, -0.6062177826), (2.1, 0))
            Line((2.1, 0), (1.8, 0))
            ThreePointArc((1.8, 0), (1.7874562932, -0.2121320344), (1.75, -0.4213074887))
            Line((1.75, -0.4213074887), (1.75, -1.1608186766))
        make_face()
    extrude(amount=-F3_DEPTH)

    # F4 (on face) → F5 (join)
    with BuildSketch(Plane.XY.offset(3)):
        with BuildLine():
            Line((-2.398436991, 0.5), (-2.556369496, 1))
            Line((-2.556369496, 1), (-6.8776812953, 1))
            ThreePointArc((-6.8776812953, 1), (-5.8706460858, -3.7199481898), (-2.0327166243, -6.6460938246))
            Line((-2.0327166243, -6.6460938246), (-2.0327166243, -6.1213203743))
            ThreePointArc((-2.0327166243, -6.1213203743), (-5.3728358118, -3.5686321385), (-6.4305909526, 0.5))
            Line((-6.4305909526, 0.5), (-2.398436991, 0.5))
        make_face()
    extrude(amount=F5_DEPTH)

    # F6: fillet of radius 0.5 on 1 edges, made by hand

    # F6_s2 → F6_t1 (join)
    with BuildSketch(Plane.XY.offset(0.7490585767)):
        with BuildLine():
            ThreePointArc((-5.95, 0.5), (-6.3035533906, 0.3535533906), (-6.45, 0))
            ThreePointArc((-6.45, 0), (-6.4451459116, 0.2501882847), (-6.4305909526, 0.5))
            Line((-6.4305909526, 0.5), (-5.95, 0.5))
        make_face()
    extrude(amount=F6_T1_DEPTH)


solid = f1.part
